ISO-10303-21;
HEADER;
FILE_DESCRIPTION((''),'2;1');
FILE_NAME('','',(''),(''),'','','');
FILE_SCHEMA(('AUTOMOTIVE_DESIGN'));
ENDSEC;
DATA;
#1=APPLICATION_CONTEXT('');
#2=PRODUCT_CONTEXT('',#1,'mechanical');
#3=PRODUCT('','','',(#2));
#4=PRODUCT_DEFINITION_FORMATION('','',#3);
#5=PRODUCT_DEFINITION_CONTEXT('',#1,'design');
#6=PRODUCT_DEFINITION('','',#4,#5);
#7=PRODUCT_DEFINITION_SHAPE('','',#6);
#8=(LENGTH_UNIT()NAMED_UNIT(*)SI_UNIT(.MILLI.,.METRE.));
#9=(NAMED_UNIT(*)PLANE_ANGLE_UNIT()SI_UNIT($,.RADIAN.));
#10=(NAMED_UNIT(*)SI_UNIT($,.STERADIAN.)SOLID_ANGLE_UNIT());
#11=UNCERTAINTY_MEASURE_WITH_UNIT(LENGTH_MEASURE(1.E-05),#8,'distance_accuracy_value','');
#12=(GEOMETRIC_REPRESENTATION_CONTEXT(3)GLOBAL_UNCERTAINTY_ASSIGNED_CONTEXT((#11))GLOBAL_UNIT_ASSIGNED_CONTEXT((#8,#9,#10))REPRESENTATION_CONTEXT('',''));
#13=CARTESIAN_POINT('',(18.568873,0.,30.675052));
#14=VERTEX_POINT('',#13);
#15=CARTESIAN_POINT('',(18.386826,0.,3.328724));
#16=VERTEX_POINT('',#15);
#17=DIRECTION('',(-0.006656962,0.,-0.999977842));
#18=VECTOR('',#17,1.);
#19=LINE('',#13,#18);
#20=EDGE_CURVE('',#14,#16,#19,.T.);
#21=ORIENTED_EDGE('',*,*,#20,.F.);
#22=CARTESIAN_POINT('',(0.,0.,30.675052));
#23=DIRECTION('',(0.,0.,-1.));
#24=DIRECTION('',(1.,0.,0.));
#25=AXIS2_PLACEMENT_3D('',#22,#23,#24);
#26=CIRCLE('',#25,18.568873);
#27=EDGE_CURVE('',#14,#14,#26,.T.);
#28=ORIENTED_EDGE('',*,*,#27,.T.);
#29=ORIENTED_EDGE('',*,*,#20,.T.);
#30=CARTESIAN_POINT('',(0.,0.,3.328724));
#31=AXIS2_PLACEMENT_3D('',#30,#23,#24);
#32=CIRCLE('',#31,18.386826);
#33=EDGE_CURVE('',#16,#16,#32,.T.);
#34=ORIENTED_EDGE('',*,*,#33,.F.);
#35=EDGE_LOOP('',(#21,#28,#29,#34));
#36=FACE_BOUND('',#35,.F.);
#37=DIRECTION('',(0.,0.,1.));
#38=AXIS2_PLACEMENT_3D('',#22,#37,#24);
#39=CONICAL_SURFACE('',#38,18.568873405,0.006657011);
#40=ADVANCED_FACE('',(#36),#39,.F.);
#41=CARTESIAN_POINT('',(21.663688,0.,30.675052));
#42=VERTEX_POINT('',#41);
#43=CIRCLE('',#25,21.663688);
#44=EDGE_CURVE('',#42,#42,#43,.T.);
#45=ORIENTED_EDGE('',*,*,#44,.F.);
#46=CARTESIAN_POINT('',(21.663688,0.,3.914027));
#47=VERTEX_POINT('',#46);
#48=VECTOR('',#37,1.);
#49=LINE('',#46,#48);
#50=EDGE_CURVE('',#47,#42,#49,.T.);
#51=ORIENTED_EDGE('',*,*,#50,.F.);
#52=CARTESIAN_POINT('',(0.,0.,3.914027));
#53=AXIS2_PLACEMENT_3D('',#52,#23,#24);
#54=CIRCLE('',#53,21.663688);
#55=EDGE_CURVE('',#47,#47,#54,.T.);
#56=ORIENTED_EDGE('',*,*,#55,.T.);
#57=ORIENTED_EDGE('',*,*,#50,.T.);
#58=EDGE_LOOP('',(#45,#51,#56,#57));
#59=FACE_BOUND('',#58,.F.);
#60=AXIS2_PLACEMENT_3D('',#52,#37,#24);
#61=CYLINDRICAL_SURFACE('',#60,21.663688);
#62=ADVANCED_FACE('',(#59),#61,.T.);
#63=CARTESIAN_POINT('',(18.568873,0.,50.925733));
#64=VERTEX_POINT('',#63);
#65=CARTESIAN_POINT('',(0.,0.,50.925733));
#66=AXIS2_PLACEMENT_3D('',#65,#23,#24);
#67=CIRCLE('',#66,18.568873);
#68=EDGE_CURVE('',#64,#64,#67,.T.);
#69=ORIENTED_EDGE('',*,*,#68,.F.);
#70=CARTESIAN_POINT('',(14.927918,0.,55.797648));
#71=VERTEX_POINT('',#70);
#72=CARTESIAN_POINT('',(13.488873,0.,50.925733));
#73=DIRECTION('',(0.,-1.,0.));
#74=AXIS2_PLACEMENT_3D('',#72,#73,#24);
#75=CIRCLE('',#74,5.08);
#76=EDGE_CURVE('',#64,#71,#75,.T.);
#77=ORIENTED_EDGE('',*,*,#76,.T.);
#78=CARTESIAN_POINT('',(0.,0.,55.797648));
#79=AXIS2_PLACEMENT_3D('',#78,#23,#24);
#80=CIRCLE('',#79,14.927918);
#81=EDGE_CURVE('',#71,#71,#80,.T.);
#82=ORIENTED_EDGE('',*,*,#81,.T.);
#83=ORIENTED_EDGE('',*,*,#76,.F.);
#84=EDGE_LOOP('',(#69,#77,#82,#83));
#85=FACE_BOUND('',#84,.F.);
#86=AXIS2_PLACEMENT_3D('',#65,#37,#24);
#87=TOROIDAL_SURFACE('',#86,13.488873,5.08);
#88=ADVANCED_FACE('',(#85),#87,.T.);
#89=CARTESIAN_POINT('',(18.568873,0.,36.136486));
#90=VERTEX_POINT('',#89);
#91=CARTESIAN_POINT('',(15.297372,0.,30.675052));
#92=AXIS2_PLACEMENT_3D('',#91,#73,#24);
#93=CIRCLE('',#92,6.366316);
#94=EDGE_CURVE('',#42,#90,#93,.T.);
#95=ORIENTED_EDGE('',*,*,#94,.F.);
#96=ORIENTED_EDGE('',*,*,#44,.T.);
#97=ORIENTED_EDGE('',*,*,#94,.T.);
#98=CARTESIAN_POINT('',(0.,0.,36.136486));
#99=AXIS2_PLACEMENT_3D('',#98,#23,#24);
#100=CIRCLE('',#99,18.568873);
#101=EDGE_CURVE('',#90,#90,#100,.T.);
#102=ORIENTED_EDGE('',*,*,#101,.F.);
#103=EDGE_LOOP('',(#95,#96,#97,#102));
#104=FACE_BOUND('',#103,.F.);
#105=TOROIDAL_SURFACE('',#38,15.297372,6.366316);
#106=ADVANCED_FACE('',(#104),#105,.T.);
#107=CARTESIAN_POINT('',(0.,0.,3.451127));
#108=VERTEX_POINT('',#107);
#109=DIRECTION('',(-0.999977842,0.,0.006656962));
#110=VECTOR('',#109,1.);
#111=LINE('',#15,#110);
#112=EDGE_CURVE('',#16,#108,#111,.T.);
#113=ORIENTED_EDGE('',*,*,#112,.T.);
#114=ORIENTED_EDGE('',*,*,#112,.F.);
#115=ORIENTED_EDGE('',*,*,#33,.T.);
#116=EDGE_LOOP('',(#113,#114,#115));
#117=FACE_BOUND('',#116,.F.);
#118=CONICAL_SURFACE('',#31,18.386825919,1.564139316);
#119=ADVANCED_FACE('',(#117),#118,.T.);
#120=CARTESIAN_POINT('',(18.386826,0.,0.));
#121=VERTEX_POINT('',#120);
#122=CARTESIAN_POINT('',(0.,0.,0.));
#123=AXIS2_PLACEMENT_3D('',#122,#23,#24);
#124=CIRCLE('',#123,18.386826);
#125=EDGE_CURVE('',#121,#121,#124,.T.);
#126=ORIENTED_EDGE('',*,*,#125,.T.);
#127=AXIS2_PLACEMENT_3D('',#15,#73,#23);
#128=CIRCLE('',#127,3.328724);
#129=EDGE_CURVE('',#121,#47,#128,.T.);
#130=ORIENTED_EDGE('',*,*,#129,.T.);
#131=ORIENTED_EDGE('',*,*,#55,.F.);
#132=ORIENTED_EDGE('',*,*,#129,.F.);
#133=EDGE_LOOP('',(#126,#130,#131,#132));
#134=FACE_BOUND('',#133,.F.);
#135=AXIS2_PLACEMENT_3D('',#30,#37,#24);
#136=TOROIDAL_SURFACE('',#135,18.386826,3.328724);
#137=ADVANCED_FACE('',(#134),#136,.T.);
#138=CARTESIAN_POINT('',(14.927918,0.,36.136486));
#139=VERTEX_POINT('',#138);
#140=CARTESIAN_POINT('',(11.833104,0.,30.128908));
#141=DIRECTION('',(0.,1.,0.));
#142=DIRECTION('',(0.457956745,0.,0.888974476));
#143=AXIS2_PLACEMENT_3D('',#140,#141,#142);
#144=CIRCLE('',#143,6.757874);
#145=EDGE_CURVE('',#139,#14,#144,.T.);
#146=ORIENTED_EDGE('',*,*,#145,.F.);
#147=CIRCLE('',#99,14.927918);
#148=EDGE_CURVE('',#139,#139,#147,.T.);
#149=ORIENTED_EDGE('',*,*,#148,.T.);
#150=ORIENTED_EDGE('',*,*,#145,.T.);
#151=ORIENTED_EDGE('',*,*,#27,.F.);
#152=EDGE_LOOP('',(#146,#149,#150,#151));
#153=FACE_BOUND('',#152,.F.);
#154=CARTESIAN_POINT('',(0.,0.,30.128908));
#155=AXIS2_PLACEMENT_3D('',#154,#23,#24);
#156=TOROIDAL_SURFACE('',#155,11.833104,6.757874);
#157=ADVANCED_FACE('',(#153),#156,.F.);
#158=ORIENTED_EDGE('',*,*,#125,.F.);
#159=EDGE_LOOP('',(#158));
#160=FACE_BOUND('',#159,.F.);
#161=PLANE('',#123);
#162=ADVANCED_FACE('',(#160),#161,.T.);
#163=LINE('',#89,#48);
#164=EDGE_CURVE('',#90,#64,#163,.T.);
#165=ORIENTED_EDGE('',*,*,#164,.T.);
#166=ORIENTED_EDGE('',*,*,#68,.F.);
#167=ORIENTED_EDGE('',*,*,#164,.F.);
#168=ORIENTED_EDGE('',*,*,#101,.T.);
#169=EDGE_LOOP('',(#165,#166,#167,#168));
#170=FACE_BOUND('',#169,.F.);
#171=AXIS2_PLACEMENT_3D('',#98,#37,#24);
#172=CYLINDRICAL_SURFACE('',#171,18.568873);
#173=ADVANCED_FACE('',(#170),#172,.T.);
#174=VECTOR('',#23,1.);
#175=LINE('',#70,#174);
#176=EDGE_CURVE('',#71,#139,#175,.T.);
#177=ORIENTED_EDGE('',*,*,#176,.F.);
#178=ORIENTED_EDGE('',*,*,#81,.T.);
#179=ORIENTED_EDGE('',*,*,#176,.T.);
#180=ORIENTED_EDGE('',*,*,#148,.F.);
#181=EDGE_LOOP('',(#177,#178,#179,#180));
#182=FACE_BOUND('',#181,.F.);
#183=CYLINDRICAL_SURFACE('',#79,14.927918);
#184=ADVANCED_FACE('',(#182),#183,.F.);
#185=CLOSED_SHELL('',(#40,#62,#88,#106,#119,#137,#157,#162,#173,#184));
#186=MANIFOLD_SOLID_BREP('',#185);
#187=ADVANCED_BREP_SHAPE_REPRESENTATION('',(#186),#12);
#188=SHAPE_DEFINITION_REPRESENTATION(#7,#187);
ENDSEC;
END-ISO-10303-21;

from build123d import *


# Not quite as in the source:
# - a fillet or chamfer that OpenCascade refuses, or shapes differently, is made with other operations: its cross-section is extruded or revolved along the edge and cut away or added


with BuildPart() as f1:
    # F0 (on Front) → F1 (revolve)
    with BuildSketch(Plane.XZ):
        with BuildLine():
            Line((0, 3.4511274384), (0, 0))
            Line((0, 0), (18.3868259192, 0))
            ThreePointArc((18.3868259192, 0), (20.9391502019, 1.1918933999), (21.6636881232, 3.9140274748))
            Line((21.6636881232, 3.9140274748), (21.6636881232, 30.6750517339))
            ThreePointArc((21.6636881232, 30.6750517339), (20.8362073086, 33.8137273466), (18.5688734055, 36.1364856362))
            Line((18.5688734055, 36.1364856362), (18.5688734055, 55.7976476848))
            Line((18.5688734055, 55.7976476848), (14.9279180914, 55.7976476848))
            Line((14.9279180914, 55.7976476848), (14.9279180914, 36.1364856362))
            ThreePointArc((14.9279180914, 36.1364856362), (17.4559954455, 33.877501736), (18.5688734055, 30.6750517339))
            Line((18.5688734055, 30.6750517339), (18.3868259192, 3.3287243314))
            Line((18.3868259192, 3.3287243314), (0, 3.4511274384))
        make_face()
    revolve(axis=Axis((0, 0, 1.7255637192), (0, 0, -1)))

    # F2: fillet of radius 5.08 on 1 edges, made by hand

    # F2_s1 → F2_t2 (revolve, cut)
    with BuildSketch(Plane.XZ):
        with BuildLine():
            ThreePointArc((18.5688734055, 50.9257332365), (17.5580715454, 53.9667900425), (14.9279180914, 55.7976476848))
            Line((14.9279180914, 55.7976476848), (18.5688734055, 55.7976476848))
            Line((18.5688734055, 55.7976476848), (18.5688734055, 50.9257332365))
        make_face()
    revolve(axis=Axis((0, 0, 55.7976476848), (0, 0, -1)), mode=Mode.SUBTRACT)


solid = f1.part
